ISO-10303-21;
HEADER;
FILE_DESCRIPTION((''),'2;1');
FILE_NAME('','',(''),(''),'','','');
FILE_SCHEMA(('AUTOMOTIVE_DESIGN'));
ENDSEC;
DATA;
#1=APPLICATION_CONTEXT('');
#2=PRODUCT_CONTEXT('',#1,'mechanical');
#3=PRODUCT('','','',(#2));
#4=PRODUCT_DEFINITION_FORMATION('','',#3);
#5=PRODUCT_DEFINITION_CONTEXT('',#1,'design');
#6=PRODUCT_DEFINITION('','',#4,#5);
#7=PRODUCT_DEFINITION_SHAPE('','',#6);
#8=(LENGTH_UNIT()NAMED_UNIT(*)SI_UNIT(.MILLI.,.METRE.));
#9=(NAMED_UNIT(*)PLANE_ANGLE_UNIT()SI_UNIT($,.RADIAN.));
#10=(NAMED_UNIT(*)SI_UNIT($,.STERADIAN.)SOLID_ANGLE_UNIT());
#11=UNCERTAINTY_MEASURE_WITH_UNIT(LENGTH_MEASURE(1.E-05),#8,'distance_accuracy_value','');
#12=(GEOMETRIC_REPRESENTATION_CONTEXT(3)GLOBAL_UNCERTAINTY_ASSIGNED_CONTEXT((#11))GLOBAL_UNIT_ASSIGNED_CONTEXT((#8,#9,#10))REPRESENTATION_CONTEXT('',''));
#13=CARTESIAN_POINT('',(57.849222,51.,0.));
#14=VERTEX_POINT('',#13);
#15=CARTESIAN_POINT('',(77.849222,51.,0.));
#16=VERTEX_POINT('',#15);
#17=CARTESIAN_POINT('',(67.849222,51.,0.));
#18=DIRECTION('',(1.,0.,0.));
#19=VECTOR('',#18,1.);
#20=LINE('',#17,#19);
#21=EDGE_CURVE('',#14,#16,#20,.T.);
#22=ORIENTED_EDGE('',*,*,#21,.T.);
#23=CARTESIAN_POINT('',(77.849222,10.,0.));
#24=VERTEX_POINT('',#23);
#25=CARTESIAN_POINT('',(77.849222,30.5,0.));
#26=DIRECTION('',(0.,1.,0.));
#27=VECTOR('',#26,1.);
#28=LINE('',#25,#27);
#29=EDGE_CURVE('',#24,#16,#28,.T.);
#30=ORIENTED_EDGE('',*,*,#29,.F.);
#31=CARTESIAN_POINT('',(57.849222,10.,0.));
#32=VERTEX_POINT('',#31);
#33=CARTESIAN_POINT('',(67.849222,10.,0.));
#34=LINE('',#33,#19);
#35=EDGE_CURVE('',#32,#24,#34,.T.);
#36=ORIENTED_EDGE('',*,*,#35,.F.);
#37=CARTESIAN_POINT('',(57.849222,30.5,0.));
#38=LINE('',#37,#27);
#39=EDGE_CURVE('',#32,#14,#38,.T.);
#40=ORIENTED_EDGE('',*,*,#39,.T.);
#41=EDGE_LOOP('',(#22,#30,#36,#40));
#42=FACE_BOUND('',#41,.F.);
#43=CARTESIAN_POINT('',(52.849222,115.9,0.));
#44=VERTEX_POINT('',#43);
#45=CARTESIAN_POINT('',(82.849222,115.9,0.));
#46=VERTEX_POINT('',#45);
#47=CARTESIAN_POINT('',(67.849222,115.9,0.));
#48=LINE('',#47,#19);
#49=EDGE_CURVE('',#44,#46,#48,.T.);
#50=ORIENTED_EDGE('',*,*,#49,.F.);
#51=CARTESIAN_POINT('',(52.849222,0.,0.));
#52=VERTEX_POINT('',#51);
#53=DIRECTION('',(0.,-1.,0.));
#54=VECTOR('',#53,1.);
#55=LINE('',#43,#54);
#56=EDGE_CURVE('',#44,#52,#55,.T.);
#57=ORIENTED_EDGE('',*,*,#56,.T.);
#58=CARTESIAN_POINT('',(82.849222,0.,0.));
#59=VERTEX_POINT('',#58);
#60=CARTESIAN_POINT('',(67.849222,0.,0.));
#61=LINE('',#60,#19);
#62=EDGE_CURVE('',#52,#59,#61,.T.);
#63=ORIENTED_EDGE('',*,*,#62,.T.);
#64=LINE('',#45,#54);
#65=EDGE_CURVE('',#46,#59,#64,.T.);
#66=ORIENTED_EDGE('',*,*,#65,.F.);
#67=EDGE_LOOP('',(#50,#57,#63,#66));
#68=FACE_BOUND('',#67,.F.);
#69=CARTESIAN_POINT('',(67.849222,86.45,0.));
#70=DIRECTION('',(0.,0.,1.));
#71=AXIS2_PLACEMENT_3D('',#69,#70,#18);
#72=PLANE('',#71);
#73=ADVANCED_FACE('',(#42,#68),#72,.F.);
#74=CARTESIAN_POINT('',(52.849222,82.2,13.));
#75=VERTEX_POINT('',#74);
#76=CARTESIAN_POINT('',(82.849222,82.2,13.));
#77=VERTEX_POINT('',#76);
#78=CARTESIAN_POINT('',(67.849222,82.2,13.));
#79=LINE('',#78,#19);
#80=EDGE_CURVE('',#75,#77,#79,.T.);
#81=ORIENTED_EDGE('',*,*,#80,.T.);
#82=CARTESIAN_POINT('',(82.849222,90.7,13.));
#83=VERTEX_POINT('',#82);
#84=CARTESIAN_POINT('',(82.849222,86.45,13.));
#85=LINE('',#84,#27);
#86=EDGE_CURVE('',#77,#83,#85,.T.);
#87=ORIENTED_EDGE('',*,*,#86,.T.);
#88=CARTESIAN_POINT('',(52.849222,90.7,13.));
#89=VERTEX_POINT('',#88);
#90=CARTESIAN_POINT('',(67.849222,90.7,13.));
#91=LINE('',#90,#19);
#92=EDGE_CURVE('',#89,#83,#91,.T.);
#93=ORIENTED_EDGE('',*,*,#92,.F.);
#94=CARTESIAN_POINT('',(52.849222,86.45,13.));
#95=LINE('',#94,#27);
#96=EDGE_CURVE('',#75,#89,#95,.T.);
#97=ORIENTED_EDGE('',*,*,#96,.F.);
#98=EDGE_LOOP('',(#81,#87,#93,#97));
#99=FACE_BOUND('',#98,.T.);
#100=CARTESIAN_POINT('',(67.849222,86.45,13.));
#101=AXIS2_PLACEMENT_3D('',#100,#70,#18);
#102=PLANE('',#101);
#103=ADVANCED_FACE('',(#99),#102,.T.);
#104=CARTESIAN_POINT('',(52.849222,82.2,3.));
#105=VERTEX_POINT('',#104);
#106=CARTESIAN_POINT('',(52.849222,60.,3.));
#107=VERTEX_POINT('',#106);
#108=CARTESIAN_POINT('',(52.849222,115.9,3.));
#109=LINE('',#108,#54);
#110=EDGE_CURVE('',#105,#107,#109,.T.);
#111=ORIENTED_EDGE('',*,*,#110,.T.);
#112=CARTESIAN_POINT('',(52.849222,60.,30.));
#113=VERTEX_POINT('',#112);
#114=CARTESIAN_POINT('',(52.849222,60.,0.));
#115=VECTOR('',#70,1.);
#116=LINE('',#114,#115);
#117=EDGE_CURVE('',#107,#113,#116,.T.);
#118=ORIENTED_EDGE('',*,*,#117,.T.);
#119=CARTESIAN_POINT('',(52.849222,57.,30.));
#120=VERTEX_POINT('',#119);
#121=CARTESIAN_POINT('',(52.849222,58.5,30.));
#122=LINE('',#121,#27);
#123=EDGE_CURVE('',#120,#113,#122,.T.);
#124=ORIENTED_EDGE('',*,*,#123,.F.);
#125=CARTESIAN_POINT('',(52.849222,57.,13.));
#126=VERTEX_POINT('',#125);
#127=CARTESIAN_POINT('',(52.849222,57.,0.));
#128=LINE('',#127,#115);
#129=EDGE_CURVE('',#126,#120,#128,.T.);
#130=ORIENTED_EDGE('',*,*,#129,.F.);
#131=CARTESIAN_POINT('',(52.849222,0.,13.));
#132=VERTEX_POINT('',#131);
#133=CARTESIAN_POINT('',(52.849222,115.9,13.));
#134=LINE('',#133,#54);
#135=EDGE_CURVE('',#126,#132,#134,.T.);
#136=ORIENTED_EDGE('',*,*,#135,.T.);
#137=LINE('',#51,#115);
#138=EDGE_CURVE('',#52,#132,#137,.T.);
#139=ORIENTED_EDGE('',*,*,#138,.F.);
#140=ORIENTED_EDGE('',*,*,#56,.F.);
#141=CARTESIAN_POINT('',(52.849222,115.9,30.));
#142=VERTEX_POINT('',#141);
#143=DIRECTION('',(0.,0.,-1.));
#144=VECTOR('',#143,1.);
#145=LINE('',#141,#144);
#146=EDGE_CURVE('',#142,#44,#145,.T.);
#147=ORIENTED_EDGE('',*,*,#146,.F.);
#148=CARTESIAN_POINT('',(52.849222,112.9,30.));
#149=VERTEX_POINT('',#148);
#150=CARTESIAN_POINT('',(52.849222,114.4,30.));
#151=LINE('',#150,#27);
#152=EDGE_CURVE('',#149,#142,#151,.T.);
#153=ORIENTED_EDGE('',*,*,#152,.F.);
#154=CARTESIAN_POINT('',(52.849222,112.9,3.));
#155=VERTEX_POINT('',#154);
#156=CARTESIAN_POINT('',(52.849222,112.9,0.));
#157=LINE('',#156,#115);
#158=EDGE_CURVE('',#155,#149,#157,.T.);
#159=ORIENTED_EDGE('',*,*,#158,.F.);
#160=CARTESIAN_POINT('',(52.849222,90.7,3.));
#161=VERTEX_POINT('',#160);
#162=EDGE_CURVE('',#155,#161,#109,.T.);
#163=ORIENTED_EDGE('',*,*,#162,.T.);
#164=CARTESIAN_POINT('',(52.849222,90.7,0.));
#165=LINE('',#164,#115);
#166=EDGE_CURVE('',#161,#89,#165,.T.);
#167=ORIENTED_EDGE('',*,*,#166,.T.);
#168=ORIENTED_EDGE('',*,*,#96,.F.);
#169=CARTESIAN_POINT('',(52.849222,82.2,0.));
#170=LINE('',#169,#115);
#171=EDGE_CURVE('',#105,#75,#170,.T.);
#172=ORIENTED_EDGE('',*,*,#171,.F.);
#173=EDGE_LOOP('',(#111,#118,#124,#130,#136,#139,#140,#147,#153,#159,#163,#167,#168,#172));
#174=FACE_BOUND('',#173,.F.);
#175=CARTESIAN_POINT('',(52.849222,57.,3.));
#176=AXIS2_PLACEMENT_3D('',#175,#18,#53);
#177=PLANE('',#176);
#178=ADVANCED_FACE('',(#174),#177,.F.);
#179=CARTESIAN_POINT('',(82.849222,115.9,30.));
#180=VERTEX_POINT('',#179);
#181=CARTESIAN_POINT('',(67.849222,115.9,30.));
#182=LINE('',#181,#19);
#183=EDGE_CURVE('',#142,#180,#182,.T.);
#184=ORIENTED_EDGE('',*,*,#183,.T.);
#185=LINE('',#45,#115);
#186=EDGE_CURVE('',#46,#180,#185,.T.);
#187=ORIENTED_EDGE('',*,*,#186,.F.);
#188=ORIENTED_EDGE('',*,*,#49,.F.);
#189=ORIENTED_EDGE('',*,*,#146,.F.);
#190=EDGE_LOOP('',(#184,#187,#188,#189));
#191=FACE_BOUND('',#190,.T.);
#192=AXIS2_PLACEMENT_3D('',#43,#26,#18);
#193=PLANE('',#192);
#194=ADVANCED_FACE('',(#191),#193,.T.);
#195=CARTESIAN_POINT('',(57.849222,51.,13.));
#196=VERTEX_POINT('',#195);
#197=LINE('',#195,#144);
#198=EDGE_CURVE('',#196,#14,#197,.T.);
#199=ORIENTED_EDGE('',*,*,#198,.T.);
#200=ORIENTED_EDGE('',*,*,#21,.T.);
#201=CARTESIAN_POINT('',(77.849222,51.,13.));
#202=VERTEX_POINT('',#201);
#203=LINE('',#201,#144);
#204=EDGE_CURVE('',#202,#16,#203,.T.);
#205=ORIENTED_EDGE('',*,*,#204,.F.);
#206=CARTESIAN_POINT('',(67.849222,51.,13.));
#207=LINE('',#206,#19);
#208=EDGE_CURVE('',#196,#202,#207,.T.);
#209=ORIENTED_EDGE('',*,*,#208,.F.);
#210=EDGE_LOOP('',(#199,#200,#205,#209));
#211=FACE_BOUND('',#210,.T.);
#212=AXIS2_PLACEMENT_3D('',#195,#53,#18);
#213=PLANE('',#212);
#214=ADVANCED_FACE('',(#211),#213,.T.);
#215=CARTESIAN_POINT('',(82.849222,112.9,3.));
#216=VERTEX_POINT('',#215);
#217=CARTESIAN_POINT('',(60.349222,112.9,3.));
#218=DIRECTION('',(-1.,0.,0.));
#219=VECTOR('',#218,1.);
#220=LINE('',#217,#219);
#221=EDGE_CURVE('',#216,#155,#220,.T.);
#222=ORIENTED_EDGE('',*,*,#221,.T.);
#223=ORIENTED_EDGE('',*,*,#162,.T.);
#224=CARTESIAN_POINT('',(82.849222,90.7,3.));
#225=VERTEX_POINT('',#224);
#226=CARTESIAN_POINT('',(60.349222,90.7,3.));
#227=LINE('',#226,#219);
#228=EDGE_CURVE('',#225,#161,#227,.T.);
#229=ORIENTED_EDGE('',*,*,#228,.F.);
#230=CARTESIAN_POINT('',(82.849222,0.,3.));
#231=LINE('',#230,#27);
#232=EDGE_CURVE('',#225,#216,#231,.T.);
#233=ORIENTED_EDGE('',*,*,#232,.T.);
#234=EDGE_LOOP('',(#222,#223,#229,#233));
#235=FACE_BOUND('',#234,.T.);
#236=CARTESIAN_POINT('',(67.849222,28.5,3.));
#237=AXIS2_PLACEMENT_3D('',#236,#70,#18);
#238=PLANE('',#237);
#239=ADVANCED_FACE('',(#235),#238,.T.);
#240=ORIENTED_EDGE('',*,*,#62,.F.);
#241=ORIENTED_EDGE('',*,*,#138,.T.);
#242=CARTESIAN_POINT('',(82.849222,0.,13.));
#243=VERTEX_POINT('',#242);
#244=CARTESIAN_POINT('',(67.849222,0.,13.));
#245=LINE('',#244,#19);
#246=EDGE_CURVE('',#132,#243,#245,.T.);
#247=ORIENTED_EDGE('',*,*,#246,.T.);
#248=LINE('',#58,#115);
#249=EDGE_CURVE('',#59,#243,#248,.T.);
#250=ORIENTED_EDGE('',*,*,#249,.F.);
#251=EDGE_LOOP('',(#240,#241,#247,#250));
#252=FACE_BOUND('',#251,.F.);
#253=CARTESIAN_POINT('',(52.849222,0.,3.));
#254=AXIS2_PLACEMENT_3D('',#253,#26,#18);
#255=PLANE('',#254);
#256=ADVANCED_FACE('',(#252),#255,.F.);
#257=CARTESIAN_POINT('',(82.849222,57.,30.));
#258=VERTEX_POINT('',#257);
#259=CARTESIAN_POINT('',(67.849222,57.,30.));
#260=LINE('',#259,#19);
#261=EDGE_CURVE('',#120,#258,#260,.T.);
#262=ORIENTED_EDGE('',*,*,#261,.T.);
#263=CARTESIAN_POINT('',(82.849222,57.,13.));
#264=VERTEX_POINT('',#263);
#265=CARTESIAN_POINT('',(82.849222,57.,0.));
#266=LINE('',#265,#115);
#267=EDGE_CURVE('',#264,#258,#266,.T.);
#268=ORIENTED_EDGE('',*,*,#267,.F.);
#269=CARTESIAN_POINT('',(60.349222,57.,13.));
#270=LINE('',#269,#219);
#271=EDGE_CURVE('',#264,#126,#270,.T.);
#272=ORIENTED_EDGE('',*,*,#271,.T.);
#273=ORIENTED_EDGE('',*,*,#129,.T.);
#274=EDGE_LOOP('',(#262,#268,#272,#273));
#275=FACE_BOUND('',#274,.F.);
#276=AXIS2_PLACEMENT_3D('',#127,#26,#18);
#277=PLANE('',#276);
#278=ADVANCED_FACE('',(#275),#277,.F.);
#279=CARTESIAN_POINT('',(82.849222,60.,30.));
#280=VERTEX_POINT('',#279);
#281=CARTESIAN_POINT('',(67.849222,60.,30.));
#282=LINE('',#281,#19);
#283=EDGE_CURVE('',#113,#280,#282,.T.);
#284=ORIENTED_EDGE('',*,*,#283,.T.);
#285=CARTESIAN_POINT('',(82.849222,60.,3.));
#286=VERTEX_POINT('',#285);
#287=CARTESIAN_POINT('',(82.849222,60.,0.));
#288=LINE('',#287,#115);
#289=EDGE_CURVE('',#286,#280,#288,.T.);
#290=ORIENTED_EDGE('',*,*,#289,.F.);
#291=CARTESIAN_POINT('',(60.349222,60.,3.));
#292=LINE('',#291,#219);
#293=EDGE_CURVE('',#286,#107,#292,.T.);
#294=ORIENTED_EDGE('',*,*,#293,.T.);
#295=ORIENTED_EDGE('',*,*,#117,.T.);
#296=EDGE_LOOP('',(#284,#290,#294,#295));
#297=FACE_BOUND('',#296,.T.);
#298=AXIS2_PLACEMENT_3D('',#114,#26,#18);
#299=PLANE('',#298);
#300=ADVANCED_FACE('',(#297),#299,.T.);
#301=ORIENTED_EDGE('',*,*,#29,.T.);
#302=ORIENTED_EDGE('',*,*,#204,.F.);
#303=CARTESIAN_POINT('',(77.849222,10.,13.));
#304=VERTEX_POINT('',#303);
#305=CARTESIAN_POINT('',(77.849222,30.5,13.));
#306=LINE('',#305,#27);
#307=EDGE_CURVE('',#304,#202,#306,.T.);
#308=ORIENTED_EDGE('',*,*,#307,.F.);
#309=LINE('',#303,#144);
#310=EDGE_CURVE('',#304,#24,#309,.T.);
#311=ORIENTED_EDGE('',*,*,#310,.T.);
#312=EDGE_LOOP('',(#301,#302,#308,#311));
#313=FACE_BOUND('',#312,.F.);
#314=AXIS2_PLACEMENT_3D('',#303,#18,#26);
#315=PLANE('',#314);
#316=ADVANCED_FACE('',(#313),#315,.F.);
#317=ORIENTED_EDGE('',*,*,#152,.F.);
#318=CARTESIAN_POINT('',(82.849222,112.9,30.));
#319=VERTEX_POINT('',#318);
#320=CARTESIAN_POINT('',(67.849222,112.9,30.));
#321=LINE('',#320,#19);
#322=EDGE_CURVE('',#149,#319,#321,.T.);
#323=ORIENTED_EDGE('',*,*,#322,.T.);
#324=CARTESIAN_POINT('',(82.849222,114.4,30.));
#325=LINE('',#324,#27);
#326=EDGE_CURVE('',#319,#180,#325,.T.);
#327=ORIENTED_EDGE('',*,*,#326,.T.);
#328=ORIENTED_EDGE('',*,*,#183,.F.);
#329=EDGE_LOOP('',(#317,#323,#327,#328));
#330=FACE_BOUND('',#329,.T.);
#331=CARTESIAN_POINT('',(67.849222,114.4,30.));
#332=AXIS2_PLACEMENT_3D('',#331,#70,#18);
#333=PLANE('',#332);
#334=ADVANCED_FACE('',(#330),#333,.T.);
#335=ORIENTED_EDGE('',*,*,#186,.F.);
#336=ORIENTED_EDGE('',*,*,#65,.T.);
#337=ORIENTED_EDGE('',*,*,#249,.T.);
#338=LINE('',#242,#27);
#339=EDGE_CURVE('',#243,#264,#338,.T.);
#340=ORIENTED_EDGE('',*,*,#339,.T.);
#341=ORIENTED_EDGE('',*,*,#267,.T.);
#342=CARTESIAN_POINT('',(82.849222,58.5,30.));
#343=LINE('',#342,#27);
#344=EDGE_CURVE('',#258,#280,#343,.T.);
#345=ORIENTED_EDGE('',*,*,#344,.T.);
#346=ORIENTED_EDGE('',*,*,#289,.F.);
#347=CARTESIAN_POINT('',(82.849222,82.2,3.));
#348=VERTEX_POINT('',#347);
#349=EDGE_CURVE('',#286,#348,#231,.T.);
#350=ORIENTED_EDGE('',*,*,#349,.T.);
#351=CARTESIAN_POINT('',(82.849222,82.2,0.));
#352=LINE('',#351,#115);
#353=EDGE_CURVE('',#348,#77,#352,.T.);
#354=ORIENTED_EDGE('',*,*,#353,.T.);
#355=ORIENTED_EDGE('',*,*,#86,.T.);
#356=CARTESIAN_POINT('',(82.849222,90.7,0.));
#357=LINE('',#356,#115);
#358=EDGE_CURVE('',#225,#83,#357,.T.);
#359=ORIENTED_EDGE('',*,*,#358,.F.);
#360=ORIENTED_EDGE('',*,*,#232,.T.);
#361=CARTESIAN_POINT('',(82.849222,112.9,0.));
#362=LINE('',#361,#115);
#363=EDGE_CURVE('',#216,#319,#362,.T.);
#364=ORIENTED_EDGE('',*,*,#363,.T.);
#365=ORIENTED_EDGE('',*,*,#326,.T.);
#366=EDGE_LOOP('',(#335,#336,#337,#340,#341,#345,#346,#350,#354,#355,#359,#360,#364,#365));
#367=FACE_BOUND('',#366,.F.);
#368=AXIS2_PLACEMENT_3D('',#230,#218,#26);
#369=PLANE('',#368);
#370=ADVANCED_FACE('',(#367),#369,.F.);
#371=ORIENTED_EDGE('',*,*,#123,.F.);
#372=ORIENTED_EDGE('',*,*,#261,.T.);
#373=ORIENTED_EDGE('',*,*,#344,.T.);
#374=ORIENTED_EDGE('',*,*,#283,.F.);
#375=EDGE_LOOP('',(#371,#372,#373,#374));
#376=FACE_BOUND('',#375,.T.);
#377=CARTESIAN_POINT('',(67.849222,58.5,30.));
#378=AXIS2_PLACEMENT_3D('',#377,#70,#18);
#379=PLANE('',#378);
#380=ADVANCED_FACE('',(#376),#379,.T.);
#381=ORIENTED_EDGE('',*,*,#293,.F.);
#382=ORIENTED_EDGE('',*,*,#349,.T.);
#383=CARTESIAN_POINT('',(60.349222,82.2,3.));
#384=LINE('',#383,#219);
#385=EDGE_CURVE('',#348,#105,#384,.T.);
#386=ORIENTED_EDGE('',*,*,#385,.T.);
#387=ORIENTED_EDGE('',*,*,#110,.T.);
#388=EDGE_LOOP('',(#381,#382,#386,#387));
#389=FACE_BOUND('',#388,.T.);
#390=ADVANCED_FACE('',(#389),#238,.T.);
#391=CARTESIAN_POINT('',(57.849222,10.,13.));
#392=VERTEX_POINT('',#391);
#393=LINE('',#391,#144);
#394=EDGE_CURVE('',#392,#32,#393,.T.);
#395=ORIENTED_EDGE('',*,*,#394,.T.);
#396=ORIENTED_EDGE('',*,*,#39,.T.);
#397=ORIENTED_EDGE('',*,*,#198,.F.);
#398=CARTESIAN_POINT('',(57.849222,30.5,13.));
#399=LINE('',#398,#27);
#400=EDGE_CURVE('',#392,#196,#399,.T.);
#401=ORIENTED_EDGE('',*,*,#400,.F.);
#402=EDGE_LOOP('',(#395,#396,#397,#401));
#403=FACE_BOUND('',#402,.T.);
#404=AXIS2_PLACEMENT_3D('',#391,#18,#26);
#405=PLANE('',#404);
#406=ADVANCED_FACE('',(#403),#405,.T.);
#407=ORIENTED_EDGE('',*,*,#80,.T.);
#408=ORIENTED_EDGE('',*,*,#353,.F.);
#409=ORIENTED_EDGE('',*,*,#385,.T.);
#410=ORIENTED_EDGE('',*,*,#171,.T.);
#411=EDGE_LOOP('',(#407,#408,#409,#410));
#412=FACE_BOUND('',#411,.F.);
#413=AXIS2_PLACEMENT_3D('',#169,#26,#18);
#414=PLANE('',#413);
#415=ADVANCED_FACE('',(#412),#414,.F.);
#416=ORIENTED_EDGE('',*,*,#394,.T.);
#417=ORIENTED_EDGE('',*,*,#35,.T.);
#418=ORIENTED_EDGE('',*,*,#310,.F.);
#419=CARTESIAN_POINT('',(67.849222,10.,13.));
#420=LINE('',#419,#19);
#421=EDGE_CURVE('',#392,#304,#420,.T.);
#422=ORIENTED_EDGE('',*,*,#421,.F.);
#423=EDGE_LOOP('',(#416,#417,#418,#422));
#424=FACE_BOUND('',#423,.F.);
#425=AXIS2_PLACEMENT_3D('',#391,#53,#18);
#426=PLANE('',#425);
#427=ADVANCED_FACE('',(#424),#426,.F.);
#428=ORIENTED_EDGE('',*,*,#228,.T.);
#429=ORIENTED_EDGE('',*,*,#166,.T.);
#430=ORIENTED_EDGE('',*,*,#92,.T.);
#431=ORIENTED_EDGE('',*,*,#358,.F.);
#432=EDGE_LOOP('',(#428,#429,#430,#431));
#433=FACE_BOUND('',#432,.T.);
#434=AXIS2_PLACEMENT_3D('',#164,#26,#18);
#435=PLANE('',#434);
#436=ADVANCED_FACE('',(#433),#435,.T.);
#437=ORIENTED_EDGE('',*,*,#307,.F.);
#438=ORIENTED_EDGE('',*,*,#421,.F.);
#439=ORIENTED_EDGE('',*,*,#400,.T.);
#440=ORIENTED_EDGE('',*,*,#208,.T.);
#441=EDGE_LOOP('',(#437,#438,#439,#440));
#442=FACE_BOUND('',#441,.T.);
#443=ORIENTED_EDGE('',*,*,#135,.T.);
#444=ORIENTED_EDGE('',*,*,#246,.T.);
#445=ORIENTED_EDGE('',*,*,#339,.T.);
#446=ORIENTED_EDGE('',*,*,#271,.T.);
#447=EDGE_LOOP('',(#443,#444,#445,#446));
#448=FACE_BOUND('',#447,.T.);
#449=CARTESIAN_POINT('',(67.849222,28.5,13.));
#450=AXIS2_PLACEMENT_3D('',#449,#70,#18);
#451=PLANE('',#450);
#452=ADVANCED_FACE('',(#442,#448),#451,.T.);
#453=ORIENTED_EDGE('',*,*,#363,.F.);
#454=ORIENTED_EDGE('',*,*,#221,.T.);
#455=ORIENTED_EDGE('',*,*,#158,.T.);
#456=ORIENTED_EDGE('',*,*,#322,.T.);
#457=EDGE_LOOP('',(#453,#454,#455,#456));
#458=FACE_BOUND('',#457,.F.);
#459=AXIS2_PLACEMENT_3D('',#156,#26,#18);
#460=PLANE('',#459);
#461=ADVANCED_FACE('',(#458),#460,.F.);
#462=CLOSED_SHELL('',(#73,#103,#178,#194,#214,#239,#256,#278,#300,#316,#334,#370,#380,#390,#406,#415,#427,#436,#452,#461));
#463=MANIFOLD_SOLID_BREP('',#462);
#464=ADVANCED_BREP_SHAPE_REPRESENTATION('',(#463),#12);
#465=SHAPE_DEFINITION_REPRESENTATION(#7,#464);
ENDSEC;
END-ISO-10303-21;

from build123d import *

# Parameters (mm, degrees)
F0_W     = 30
F0_H     = 57
F0_H_2   = 3
F0_H_3   = 22.2
F0_H_4   = 8.5
F1_DEPTH = 3
F2_DEPTH = 30
F3_DEPTH = 13
F4_DEPTH = 10
F5_W     = 20
F5_H     = 41
F6_DEPTH = 13


# Not quite as in the source:
# - a feature of the source that left no trace in its solid (it failed there, or was rolled back) is left out


with BuildPart() as f1:
    # F0 (on Top) → F1 (new body)
    with BuildSketch(Plane.XY):
        with Locations((67.8492219866, 28.5)):
            Rectangle(F0_W, F0_H)
        with Locations((67.8492219866, 58.5)):
            Rectangle(F0_W, F0_H_2)
        with Locations((67.8492219866, 71.1)):
            Rectangle(F0_W, F0_H_3)
        with Locations((67.8492219866, 86.45)):
            Rectangle(F0_W, F0_H_4)
        with Locations((67.8492219866, 101.8)):
            Rectangle(F0_W, F0_H_3)
        with Locations((67.8492219866, 114.4)):
            Rectangle(F0_W, F0_H_2)
    extrude(amount=F1_DEPTH)

    # F0 (on Top) → F2 (join)
    with BuildSketch(Plane.XY):
        with Locations((67.8492219866, 58.5)):
            Rectangle(F0_W, F0_H_2)
        with Locations((67.8492219866, 114.4)):
            Rectangle(F0_W, F0_H_2)
    extrude(amount=F2_DEPTH)

    # F0 (on Top) → F3 (join)
    with BuildSketch(Plane.XY):
        with Locations((67.8492219866, 86.45)):
            Rectangle(F0_W, F0_H_4)
    extrude(amount=F3_DEPTH)

    # F4 (add): a face of the model
    f4_faces = [f1.faces().sort_by_distance(p)[0] for p in [
        (67.8492219866, 28.5, 3),
    ]]
    extrude(f4_faces, amount=F4_DEPTH)

    # F5 (on face) → F6 (cut, through all)
    with BuildSketch(Plane.XY.offset(13)):
        with Locations((67.8492219866, 30.5)):
            Rectangle(F5_W, F5_H)
    extrude(amount=-F6_DEPTH, mode=Mode.SUBTRACT)


solid = f1.part
